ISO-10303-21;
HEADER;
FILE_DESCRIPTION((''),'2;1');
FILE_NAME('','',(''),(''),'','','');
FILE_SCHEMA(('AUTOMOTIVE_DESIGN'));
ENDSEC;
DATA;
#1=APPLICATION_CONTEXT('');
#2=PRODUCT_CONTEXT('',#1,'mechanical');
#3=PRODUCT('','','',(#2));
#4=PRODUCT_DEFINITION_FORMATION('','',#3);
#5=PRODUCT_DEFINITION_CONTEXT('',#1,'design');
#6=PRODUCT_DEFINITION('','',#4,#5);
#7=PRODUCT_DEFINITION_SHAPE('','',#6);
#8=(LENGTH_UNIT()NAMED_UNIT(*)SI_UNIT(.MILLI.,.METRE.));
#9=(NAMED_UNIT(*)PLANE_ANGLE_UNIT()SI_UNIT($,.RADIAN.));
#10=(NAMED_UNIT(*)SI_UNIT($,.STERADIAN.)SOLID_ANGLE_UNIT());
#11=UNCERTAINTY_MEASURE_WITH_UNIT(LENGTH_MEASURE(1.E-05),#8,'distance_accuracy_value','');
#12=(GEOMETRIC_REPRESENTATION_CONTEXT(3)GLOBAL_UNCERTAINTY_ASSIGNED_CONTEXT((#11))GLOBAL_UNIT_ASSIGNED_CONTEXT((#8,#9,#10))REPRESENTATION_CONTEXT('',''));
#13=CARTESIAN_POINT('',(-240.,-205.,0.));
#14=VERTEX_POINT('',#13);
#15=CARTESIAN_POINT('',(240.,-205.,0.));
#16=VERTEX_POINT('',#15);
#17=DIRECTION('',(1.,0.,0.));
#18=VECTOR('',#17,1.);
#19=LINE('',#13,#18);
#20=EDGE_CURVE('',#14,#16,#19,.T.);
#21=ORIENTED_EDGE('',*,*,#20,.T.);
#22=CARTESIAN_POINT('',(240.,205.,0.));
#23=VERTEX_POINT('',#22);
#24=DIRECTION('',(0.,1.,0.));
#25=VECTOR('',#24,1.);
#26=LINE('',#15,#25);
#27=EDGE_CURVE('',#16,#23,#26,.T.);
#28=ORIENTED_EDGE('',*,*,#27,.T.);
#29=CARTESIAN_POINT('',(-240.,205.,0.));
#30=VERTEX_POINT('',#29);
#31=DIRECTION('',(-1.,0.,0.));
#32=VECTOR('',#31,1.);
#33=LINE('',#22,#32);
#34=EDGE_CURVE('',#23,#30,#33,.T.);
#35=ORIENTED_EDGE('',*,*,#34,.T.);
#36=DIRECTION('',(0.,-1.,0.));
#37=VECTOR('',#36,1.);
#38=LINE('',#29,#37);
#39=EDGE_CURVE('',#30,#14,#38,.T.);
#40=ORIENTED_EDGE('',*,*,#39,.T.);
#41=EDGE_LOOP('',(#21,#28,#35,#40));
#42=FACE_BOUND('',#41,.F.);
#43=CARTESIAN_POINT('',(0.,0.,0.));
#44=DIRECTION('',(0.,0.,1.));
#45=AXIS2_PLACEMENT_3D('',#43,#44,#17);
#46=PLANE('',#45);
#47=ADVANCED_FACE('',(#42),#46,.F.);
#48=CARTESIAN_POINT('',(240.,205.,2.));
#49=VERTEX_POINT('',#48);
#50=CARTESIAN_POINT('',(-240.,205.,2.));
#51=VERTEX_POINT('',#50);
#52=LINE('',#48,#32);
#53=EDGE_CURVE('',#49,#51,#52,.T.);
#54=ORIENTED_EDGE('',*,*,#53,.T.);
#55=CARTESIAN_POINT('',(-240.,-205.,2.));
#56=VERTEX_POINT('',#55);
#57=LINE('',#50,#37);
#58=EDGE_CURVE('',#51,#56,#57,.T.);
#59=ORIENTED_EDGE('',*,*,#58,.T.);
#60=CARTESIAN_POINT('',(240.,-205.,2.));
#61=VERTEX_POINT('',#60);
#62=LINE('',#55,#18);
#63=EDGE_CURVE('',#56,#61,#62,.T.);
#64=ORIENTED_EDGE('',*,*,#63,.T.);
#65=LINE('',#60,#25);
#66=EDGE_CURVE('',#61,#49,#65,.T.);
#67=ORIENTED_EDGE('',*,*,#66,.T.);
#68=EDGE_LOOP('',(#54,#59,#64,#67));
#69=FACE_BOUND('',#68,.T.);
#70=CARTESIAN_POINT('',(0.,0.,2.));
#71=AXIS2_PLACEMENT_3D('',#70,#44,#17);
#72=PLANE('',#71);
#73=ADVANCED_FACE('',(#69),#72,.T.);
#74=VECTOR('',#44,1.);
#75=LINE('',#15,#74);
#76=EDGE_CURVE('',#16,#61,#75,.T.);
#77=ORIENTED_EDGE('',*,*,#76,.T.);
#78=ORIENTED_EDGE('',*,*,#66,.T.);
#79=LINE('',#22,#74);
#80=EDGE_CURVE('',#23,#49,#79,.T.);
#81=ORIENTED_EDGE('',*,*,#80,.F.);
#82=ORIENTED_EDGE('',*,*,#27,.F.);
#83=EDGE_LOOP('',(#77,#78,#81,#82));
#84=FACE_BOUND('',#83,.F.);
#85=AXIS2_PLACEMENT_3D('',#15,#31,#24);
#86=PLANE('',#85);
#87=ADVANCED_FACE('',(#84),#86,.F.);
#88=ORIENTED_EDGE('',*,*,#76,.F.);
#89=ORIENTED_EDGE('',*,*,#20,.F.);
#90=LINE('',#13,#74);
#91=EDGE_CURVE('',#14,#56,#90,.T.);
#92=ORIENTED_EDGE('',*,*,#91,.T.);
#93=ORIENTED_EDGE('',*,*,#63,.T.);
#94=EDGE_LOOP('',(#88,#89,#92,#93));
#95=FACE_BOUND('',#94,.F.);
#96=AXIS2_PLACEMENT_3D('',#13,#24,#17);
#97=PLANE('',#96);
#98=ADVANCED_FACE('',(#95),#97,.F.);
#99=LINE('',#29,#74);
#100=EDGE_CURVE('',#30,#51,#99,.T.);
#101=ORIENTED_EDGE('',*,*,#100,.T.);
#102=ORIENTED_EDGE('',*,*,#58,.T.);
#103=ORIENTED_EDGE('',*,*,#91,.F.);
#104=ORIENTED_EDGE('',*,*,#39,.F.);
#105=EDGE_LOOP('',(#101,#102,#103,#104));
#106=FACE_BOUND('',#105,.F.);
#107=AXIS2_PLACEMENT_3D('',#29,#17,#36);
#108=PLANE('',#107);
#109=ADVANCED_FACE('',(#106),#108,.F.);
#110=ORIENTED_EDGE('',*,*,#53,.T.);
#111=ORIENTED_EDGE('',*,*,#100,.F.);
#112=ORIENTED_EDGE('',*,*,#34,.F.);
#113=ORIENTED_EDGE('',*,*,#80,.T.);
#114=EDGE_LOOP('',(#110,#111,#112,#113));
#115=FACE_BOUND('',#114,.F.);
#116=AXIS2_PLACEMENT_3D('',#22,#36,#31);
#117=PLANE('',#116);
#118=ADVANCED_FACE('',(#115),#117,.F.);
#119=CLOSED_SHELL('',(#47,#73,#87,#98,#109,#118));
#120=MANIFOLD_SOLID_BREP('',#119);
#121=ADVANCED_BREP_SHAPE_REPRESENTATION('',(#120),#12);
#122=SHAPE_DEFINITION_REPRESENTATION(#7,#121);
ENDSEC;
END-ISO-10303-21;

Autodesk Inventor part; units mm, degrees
ref_plane "YZ Plane" through (0, 0, 0) normal (1, 0, 0) x (0, 1, 0)
ref_plane "XZ Plane" through (0, 0, 0) normal (0, 1, 0) x (-1, 0, 0)
ref_plane "XY Plane" through (0, 0, 0) normal (0, 0, 1) x (1, 0, 0)
sketch "Sketch1" plane through (0, 0, 0) normal (0, 0, 1) x (1, 0, 0)
  line L0 (-240, -205) -> (240, -205)
  line L1 (240, -205) -> (240, 205)
  line L2 (240, 205) -> (-240, 205)
  line L3 (-240, 205) -> (-240, -205)
  line L4 (-240, -205) -> (240, 205) construction
  line L5 (240, -205) -> (-240, 205) construction
  point P0 (0, 0)
  dimension "d0" = 480
  dimension "d1" = 410
extrude "Plate1" add sketch "Sketch1" along normal blind 2
sketch "Sketch2" plane through (0, 0, 0) normal (0, 0, -1) x (-1, 0, 0)
  line L0 (-220, 185) -> (-20, 185) construction
  line L1 (-20, 185) -> (-20, 165) construction
  line L2 (-20, 165) -> (-220, 165) construction
  line L3 (-220, 165) -> (-220, 185) construction
  line L4 (-240, 205) -> (240, 205) projected
  line L5 (-240, -205) -> (-240, 205) projected
  point P0 (0, 0)
  point P1 (-220, 175)
  dimension "d6" = 200
  dimension "d7" = 20
  dimension "d8" = 20
  dimension "d9" = 20
mark "Mark1"
equation "\"d2\" = Thickness"
equation "\"BendReliefWidth\" = Thickness"
equation "\"BendReliefDepth\" = 0.5 * Thickness"
equation "\"CornerReliefSize\" = 4 * Thickness"
equation "\"MinimumRemnant\" = 2 * Thickness"
equation "\"TransitionRadius\" = BendRadius"
equation "\"JacobiRadiusSize\" = BendRadius"
equation "\"GapSize\" = Thickness"
equation "\"Thickness\" = 2"
equation "\"BendRadius\" = 2.75"
properties part number "TRM 012 back main" material "AISI 304"
